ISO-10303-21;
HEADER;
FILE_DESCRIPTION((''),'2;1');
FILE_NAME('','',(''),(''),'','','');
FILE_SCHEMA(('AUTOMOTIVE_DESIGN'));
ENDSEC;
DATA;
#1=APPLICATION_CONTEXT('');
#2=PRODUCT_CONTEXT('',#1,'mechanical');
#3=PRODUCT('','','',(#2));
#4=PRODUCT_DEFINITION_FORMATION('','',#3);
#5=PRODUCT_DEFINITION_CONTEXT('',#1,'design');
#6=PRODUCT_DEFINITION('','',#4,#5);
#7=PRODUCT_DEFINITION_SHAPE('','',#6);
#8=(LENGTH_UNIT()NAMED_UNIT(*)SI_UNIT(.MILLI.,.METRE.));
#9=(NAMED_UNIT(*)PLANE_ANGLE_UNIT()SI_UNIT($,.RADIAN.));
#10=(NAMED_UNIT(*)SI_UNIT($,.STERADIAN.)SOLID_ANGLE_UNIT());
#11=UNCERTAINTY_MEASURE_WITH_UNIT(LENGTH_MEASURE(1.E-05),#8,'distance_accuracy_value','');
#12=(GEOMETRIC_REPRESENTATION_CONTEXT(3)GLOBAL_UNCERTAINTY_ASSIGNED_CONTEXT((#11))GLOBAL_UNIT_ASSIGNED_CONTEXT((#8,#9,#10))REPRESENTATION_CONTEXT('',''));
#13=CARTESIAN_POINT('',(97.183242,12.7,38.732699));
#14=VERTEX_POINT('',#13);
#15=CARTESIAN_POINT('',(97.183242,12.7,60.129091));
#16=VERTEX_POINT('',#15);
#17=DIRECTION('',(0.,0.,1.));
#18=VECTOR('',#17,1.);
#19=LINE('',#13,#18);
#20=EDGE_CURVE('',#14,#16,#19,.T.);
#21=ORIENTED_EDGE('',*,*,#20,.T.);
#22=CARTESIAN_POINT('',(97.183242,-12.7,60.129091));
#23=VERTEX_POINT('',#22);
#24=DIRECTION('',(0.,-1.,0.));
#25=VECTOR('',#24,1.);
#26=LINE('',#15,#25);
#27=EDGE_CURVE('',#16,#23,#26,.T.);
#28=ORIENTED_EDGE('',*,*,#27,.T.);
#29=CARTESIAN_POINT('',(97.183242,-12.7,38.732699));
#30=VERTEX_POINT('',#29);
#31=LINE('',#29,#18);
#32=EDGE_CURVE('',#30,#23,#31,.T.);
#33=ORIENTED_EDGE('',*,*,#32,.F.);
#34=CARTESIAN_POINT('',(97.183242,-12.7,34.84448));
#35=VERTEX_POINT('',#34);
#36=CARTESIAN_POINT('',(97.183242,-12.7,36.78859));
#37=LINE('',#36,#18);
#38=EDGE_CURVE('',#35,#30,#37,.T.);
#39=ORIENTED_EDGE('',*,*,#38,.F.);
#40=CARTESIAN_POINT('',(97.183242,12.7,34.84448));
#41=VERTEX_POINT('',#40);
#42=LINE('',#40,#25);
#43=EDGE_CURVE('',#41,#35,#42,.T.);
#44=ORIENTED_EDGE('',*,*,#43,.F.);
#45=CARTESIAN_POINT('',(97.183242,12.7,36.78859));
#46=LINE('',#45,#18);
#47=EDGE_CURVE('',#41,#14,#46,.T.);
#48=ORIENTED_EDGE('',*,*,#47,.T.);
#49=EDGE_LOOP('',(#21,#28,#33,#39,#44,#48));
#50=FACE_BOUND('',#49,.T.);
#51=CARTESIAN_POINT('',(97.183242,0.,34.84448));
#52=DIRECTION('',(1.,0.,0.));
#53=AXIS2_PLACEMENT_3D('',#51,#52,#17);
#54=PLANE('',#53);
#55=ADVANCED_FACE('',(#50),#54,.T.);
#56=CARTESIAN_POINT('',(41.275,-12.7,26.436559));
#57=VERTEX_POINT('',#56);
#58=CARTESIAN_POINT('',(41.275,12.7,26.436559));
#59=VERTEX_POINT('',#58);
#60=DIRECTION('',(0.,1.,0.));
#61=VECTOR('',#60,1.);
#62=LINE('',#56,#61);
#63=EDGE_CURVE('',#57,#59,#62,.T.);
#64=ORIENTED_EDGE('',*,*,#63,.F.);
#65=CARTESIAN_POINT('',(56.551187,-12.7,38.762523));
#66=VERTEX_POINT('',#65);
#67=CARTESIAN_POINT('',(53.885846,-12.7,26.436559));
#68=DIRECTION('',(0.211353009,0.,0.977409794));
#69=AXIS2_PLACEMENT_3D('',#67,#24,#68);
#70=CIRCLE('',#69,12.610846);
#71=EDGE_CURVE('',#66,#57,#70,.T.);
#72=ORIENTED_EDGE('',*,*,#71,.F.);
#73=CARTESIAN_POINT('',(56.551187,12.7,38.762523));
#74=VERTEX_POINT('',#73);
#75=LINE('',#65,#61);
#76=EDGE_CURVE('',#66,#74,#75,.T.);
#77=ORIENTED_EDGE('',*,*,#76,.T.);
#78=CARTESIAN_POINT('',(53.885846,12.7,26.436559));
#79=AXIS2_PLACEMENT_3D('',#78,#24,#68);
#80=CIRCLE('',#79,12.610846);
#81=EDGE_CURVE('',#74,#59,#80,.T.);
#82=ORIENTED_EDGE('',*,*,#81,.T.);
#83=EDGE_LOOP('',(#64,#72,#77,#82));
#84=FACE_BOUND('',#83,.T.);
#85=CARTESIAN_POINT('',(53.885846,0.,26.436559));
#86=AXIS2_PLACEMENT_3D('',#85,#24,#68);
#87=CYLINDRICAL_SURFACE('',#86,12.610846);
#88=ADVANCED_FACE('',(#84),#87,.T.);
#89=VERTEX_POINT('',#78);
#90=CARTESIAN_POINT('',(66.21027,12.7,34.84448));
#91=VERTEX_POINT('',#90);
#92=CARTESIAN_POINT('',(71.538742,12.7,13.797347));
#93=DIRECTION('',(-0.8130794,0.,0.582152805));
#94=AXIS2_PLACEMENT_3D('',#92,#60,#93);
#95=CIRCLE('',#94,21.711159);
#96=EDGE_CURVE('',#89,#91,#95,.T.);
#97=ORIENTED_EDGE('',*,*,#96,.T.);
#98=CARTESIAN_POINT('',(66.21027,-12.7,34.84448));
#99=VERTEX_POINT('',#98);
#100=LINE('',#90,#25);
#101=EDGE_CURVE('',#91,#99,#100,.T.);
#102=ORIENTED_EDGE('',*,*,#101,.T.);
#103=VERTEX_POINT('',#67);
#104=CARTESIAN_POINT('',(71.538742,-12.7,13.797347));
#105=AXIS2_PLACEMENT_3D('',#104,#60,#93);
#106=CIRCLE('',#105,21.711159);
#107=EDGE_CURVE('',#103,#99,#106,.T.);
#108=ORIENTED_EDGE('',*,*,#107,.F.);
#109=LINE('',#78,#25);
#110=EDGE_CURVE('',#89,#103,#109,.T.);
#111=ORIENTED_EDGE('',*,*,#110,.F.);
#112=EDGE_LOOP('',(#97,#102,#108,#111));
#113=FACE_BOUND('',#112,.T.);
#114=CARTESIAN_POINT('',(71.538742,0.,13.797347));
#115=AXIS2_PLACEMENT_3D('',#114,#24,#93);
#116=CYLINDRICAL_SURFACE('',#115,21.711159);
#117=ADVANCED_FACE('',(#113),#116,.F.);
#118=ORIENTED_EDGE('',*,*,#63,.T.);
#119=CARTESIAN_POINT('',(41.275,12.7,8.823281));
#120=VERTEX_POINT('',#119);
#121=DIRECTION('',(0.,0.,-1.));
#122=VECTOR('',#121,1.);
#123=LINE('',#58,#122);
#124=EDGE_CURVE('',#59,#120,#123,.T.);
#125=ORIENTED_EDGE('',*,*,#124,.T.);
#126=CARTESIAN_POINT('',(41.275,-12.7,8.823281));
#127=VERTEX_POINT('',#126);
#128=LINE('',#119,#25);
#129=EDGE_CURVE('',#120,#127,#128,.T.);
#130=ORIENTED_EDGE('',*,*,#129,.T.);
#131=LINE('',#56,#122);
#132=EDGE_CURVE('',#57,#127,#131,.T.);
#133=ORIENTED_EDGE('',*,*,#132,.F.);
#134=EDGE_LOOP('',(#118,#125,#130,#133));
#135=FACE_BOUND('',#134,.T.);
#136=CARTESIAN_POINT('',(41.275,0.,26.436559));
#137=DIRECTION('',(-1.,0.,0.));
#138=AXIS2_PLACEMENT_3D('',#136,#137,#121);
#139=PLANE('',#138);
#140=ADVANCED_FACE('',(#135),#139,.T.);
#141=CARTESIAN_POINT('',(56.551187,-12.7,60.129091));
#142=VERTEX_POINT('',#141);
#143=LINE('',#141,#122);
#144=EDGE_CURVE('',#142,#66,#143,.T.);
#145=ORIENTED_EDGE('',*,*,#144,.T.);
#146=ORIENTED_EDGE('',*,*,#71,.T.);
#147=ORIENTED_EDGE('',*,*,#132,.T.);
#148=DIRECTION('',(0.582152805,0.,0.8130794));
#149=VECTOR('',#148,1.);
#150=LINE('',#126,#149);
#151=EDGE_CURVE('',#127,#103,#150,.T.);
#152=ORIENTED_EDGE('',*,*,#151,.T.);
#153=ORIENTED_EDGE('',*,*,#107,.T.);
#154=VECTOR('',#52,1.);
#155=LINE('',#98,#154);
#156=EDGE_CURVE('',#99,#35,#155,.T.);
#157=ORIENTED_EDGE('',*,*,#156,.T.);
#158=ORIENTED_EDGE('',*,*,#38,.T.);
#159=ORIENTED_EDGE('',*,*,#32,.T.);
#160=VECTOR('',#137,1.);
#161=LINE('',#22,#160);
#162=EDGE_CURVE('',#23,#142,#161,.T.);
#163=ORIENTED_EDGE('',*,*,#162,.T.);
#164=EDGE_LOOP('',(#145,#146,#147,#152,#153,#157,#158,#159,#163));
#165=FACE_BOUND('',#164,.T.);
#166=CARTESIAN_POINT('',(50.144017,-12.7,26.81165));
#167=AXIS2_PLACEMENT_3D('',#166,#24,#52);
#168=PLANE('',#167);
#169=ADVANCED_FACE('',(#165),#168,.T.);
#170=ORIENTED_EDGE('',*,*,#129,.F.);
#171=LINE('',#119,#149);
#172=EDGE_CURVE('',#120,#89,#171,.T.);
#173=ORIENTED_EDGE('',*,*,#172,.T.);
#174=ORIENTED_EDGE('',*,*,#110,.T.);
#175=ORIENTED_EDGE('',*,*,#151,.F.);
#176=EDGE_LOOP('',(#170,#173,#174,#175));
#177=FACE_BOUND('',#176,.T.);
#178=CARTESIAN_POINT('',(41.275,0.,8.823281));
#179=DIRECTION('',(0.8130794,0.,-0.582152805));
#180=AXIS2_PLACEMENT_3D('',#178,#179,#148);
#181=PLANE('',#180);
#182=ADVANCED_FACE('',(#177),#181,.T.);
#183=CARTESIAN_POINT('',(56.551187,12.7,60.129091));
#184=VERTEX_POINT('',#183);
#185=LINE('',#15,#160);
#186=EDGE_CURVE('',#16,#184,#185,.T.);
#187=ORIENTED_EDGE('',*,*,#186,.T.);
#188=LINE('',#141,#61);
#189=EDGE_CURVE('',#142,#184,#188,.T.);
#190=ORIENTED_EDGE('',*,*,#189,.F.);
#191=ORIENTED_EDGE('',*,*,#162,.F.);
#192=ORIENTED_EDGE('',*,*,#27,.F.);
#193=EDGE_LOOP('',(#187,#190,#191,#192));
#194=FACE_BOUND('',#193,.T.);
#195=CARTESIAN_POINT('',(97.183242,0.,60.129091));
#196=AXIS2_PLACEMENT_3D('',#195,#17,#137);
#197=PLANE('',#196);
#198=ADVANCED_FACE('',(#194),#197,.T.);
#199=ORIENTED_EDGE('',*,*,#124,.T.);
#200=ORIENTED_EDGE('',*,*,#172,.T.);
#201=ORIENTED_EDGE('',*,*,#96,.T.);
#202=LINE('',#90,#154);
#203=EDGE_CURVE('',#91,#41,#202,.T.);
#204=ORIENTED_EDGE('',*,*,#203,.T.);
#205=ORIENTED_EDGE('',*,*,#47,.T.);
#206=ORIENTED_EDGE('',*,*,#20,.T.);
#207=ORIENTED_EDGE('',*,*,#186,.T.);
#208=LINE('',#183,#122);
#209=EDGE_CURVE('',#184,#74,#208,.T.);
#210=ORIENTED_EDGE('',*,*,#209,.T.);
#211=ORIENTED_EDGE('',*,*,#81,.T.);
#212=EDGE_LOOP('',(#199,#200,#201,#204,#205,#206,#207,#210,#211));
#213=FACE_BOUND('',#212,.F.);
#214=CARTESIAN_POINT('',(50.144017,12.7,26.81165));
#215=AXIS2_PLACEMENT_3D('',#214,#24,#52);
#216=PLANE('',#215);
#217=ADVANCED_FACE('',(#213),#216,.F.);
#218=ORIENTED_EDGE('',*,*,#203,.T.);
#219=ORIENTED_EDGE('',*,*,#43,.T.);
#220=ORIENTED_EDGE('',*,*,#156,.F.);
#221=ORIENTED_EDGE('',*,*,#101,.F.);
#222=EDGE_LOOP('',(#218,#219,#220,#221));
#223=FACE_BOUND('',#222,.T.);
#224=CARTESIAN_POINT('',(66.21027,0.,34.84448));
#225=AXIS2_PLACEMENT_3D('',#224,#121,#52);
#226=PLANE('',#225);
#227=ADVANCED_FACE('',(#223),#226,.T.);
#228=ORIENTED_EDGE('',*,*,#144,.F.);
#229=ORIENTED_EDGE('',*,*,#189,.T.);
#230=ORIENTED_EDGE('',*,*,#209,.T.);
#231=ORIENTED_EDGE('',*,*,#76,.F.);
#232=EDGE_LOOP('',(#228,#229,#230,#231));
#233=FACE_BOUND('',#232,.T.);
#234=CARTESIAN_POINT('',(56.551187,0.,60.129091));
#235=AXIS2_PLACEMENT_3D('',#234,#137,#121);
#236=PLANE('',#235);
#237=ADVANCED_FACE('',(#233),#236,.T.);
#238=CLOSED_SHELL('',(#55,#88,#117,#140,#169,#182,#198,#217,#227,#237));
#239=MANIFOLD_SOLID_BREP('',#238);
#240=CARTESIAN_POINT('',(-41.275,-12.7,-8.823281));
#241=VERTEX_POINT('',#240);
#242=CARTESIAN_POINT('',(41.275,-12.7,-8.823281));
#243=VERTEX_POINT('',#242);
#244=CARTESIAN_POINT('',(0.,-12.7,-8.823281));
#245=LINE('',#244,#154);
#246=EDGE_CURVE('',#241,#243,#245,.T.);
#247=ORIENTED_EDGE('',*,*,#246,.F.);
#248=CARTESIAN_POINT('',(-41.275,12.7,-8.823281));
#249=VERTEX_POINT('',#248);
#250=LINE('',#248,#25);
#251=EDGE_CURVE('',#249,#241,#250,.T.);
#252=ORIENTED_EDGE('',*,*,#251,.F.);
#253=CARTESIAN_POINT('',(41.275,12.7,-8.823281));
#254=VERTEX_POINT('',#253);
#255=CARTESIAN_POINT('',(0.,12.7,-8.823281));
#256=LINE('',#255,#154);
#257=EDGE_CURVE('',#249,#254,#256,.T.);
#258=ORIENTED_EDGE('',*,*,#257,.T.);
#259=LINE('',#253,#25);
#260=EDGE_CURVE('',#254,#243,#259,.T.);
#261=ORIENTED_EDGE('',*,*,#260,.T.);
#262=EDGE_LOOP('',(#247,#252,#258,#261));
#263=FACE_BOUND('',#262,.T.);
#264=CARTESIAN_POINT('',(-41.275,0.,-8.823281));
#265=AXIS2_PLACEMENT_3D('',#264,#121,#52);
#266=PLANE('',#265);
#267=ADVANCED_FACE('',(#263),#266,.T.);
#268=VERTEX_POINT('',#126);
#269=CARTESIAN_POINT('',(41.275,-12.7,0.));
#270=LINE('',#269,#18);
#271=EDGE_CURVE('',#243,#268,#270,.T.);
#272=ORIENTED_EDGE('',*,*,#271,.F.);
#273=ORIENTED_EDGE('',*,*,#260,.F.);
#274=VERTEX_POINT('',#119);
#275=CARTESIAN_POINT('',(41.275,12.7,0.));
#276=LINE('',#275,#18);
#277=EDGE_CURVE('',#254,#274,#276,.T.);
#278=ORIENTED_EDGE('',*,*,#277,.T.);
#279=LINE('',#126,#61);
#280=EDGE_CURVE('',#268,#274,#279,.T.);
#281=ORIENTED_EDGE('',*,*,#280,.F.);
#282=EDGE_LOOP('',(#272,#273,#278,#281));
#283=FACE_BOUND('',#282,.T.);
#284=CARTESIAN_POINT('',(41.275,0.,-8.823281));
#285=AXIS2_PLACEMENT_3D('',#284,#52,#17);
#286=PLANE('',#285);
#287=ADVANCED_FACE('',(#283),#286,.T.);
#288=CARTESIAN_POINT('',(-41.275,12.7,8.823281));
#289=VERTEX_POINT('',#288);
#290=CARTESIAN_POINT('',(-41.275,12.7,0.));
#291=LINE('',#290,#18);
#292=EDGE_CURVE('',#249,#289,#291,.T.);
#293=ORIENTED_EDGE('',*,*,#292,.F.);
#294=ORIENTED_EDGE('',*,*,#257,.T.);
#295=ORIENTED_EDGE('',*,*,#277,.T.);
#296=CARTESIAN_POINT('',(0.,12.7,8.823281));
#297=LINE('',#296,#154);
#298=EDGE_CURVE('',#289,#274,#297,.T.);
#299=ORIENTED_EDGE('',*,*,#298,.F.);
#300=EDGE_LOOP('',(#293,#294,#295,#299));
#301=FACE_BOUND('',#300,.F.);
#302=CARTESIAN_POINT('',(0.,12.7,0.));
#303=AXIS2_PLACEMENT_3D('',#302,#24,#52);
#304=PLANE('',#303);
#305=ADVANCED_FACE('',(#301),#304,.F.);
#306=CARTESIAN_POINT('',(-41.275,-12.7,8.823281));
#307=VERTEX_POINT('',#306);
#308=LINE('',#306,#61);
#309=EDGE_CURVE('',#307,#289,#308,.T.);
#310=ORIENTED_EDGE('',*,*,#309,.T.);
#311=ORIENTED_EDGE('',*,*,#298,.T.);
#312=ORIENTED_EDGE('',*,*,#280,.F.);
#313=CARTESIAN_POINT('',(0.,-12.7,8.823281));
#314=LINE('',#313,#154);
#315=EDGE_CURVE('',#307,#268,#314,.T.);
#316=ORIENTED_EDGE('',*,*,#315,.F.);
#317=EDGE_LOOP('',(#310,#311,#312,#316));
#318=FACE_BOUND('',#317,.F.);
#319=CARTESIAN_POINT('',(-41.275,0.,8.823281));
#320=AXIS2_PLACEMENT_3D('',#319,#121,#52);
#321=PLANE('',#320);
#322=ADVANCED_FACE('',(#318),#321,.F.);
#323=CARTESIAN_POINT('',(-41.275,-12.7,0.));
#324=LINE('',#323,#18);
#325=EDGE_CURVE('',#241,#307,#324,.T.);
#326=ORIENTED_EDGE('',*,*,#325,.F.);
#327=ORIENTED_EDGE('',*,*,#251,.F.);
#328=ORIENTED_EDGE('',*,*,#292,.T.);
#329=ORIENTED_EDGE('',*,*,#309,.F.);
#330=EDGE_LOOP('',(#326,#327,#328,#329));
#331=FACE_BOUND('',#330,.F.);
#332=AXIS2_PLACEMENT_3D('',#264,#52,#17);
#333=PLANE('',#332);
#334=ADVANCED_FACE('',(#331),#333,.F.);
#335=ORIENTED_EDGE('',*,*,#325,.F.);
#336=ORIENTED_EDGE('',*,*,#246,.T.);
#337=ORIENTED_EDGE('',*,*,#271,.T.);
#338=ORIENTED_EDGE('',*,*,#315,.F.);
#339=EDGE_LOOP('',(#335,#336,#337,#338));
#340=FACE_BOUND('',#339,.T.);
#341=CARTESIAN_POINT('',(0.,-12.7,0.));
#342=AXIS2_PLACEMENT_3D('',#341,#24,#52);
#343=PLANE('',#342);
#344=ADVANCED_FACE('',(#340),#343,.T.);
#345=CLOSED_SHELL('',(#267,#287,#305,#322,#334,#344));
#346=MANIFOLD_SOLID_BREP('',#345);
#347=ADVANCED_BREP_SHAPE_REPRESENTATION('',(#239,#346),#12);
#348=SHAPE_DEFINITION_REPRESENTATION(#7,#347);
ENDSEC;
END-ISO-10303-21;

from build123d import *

# Parameters (mm, degrees)
F0_W     = 20.3160279515
F0_H     = 3.888219498
F1_DEPTH = 12.7
F0_W_2   = 82.55
F0_H_2   = 17.6465612206


with BuildPart() as f1:
    # F0 (on Front) → F1 (new body, symmetric)
    with BuildSketch(Plane.XZ):
        with BuildLine():
            Line((41.275, 26.4365587761), (41.275, 8.8232806103))
            Line((41.275, 8.8232806103), (53.8858462351, 26.4365587761))
            ThreePointArc((53.8858462351, 26.4365587761), (59.3031752306, 31.7323772422), (66.2102704506, 34.8444797939))
            Line((66.2102704506, 34.8444797939), (56.5511865373, 34.8444797939))
            Line((56.5511865373, 34.8444797939), (56.5511865373, 38.7625233971))
            ThreePointArc((56.5511865373, 38.7625233971), (45.9668423189, 36.2509777472), (41.275, 26.4365587761))
        make_face()
        with BuildLine():
            ThreePointArc((56.6855553593, 38.7326992919), (56.6184116374, 38.747794664), (56.5511865373, 38.7625233971))
            Line((56.5511865373, 38.7625233971), (56.5511865373, 34.8444797939))
            Line((56.5511865373, 34.8444797939), (66.2102704506, 34.8444797939))
            ThreePointArc((66.2102704506, 34.8444797939), (71.5387424697, 35.508505706), (76.8672144887, 34.8444797939))
            Line((76.8672144887, 34.8444797939), (76.8672144887, 38.7326992919))
            Line((76.8672144887, 38.7326992919), (56.6855553593, 38.7326992919))
        make_face()
        with BuildLine():
            Line((56.5511865373, 60.1290911436), (56.5511865373, 38.7625233971))
            ThreePointArc((56.5511865373, 38.7625233971), (56.6184116374, 38.747794664), (56.6855553593, 38.7326992919))
            Line((56.6855553593, 38.7326992919), (56.6855553593, 60.1290911436))
            Line((56.6855553593, 60.1290911436), (56.5511865373, 60.1290911436))
        make_face()
        with BuildLine():
            ThreePointArc((76.8672144887, 34.8444797939), (71.5387424697, 35.508505706), (66.2102704506, 34.8444797939))
            Line((66.2102704506, 34.8444797939), (76.8672144887, 34.8444797939))
        make_face()
        Polygon((56.6855553593, 60.1290911436), (56.6855553593, 38.7326992919), (76.8672144887, 38.7326992919), (97.1832424402, 38.7326992919), (97.1832424402, 60.1290911436), align=None)
        with Locations((87.0252284645, 36.7885895429)):
            Rectangle(F0_W, F0_H)
    extrude(amount=F1_DEPTH, both=True)


with BuildPart() as f1b:
    # F0 (on Front) → F1, piece 2 (new body, symmetric)
    with BuildSketch(Plane.XZ):
        Rectangle(F0_W_2, F0_H_2)
    extrude(amount=F1_DEPTH, both=True)


solid = Compound([f1.part, f1b.part])
